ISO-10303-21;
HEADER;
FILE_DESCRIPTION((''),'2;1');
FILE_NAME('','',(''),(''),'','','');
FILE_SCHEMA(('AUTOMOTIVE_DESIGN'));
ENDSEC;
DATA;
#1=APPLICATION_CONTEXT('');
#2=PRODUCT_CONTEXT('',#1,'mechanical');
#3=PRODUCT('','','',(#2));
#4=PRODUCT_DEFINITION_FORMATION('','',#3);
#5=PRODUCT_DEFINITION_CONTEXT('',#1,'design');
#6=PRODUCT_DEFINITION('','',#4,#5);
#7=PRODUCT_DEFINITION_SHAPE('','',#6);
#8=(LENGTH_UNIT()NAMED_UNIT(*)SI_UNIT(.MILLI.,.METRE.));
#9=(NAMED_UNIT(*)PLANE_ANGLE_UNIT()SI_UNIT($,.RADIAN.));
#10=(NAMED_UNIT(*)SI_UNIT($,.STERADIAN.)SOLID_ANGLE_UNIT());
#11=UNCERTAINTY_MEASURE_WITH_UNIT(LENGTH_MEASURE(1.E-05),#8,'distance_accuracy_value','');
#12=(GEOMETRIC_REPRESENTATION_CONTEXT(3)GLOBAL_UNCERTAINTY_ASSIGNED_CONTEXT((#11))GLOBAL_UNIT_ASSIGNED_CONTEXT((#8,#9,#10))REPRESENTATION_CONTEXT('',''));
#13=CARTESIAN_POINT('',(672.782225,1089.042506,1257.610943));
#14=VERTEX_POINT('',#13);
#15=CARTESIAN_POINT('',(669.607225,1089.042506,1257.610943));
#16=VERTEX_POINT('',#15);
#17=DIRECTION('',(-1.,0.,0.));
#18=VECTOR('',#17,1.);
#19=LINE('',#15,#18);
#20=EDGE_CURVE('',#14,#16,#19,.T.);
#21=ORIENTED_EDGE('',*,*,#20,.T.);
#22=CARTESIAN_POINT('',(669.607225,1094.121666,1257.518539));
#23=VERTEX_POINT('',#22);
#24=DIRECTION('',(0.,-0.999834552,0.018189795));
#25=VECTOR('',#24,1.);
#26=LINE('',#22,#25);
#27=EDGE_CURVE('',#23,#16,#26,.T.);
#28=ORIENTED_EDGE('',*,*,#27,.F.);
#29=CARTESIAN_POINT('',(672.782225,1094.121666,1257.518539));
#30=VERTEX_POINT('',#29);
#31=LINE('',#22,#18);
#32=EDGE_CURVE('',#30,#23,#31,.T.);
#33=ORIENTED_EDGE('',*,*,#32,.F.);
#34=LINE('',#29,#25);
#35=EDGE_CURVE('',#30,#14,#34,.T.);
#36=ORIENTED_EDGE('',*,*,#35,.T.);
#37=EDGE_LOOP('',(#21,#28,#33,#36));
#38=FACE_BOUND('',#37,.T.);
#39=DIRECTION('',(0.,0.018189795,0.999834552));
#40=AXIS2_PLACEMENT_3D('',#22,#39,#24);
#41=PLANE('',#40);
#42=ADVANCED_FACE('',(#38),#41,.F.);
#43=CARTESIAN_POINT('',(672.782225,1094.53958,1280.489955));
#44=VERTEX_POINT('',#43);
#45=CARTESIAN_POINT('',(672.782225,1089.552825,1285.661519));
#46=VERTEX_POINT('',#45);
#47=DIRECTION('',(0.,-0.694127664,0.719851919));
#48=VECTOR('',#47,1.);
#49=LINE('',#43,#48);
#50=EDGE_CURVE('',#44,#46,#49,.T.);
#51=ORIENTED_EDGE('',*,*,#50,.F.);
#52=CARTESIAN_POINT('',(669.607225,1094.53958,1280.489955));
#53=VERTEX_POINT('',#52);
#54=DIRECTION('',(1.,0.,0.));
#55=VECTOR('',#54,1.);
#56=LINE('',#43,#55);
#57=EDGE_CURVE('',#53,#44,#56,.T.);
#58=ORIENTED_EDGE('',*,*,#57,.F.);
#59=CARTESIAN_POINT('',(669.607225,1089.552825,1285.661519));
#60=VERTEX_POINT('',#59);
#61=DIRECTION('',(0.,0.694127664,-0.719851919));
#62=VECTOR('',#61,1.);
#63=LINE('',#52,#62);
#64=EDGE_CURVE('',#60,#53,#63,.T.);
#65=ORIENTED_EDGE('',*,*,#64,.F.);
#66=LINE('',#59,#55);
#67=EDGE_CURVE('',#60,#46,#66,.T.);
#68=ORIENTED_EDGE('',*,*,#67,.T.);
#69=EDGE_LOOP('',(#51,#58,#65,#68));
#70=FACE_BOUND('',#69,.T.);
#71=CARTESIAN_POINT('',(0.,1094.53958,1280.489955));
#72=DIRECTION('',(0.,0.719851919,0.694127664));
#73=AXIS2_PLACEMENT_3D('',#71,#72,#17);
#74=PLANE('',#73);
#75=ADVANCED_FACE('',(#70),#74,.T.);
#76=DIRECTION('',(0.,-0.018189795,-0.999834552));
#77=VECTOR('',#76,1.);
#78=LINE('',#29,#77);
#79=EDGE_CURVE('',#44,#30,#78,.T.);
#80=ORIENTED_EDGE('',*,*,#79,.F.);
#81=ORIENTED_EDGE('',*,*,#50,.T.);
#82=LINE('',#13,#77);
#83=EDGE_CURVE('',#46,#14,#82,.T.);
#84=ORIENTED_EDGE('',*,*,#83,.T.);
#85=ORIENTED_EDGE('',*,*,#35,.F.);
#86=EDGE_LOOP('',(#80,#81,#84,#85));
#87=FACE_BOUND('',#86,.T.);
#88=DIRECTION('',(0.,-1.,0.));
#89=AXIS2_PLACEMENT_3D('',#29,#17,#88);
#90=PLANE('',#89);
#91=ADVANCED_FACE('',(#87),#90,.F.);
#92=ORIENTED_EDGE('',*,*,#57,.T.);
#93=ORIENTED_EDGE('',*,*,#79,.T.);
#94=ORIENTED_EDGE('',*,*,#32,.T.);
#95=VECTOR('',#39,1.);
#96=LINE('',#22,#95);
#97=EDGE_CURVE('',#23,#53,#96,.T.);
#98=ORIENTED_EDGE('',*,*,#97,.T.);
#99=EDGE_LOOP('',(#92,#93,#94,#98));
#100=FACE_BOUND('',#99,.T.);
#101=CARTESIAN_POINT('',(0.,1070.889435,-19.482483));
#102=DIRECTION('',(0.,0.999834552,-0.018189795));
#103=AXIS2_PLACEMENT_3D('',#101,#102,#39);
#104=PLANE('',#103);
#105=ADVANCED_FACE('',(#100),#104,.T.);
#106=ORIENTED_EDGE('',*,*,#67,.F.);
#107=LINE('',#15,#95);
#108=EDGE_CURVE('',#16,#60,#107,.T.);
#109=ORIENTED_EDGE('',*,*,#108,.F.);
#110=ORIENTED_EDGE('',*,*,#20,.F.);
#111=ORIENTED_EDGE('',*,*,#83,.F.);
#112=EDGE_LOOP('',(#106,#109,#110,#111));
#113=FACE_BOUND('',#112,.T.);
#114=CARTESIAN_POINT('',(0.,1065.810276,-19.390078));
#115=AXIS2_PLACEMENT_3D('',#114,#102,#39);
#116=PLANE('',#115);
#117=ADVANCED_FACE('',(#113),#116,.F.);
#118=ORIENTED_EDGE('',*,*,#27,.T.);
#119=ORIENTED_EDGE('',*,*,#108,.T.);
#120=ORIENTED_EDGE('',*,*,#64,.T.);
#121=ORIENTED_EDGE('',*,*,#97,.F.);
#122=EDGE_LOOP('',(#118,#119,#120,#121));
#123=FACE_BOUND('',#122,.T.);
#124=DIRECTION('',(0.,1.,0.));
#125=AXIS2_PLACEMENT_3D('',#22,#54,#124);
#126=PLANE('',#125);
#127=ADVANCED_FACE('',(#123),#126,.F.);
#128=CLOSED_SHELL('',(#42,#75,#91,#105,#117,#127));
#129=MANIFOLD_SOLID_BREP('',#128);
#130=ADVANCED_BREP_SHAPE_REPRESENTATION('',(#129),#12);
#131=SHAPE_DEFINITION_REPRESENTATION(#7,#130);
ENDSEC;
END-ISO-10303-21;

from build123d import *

# Parameters (mm, degrees)
SKETCH2_W           = 3.175
SKETCH2_H           = 28.055216984
BOSS_EXTRUDE1_DEPTH = 5.08
CHAMFER1_SIZE       = 5.08


with BuildPart() as part:
    # Sketch2 → Boss-Extrude1 (new body)
    with BuildSketch(Plane(origin=(0, 1065.810275743, -19.39007848), x_dir=(1, 0, 0), z_dir=(4.449407192603594e-15, 0.9998345519923184, -0.018189795004890538))):
        with Locations((671.194724889, -1291.239942416)):
            Rectangle(SKETCH2_W, SKETCH2_H)
    extrude(amount=BOSS_EXTRUDE1_DEPTH)

    # Chamfer1
    chamfer1_edges = [part.edges().sort_by_distance(p)[0] for p in [
        (671.194724889, 1094.631984445, 1285.569114354),
    ]]
    chamfer(chamfer1_edges, length=CHAMFER1_SIZE - 0.0001)  # a hair under: the kernel refuses the full size


solid = part.part
